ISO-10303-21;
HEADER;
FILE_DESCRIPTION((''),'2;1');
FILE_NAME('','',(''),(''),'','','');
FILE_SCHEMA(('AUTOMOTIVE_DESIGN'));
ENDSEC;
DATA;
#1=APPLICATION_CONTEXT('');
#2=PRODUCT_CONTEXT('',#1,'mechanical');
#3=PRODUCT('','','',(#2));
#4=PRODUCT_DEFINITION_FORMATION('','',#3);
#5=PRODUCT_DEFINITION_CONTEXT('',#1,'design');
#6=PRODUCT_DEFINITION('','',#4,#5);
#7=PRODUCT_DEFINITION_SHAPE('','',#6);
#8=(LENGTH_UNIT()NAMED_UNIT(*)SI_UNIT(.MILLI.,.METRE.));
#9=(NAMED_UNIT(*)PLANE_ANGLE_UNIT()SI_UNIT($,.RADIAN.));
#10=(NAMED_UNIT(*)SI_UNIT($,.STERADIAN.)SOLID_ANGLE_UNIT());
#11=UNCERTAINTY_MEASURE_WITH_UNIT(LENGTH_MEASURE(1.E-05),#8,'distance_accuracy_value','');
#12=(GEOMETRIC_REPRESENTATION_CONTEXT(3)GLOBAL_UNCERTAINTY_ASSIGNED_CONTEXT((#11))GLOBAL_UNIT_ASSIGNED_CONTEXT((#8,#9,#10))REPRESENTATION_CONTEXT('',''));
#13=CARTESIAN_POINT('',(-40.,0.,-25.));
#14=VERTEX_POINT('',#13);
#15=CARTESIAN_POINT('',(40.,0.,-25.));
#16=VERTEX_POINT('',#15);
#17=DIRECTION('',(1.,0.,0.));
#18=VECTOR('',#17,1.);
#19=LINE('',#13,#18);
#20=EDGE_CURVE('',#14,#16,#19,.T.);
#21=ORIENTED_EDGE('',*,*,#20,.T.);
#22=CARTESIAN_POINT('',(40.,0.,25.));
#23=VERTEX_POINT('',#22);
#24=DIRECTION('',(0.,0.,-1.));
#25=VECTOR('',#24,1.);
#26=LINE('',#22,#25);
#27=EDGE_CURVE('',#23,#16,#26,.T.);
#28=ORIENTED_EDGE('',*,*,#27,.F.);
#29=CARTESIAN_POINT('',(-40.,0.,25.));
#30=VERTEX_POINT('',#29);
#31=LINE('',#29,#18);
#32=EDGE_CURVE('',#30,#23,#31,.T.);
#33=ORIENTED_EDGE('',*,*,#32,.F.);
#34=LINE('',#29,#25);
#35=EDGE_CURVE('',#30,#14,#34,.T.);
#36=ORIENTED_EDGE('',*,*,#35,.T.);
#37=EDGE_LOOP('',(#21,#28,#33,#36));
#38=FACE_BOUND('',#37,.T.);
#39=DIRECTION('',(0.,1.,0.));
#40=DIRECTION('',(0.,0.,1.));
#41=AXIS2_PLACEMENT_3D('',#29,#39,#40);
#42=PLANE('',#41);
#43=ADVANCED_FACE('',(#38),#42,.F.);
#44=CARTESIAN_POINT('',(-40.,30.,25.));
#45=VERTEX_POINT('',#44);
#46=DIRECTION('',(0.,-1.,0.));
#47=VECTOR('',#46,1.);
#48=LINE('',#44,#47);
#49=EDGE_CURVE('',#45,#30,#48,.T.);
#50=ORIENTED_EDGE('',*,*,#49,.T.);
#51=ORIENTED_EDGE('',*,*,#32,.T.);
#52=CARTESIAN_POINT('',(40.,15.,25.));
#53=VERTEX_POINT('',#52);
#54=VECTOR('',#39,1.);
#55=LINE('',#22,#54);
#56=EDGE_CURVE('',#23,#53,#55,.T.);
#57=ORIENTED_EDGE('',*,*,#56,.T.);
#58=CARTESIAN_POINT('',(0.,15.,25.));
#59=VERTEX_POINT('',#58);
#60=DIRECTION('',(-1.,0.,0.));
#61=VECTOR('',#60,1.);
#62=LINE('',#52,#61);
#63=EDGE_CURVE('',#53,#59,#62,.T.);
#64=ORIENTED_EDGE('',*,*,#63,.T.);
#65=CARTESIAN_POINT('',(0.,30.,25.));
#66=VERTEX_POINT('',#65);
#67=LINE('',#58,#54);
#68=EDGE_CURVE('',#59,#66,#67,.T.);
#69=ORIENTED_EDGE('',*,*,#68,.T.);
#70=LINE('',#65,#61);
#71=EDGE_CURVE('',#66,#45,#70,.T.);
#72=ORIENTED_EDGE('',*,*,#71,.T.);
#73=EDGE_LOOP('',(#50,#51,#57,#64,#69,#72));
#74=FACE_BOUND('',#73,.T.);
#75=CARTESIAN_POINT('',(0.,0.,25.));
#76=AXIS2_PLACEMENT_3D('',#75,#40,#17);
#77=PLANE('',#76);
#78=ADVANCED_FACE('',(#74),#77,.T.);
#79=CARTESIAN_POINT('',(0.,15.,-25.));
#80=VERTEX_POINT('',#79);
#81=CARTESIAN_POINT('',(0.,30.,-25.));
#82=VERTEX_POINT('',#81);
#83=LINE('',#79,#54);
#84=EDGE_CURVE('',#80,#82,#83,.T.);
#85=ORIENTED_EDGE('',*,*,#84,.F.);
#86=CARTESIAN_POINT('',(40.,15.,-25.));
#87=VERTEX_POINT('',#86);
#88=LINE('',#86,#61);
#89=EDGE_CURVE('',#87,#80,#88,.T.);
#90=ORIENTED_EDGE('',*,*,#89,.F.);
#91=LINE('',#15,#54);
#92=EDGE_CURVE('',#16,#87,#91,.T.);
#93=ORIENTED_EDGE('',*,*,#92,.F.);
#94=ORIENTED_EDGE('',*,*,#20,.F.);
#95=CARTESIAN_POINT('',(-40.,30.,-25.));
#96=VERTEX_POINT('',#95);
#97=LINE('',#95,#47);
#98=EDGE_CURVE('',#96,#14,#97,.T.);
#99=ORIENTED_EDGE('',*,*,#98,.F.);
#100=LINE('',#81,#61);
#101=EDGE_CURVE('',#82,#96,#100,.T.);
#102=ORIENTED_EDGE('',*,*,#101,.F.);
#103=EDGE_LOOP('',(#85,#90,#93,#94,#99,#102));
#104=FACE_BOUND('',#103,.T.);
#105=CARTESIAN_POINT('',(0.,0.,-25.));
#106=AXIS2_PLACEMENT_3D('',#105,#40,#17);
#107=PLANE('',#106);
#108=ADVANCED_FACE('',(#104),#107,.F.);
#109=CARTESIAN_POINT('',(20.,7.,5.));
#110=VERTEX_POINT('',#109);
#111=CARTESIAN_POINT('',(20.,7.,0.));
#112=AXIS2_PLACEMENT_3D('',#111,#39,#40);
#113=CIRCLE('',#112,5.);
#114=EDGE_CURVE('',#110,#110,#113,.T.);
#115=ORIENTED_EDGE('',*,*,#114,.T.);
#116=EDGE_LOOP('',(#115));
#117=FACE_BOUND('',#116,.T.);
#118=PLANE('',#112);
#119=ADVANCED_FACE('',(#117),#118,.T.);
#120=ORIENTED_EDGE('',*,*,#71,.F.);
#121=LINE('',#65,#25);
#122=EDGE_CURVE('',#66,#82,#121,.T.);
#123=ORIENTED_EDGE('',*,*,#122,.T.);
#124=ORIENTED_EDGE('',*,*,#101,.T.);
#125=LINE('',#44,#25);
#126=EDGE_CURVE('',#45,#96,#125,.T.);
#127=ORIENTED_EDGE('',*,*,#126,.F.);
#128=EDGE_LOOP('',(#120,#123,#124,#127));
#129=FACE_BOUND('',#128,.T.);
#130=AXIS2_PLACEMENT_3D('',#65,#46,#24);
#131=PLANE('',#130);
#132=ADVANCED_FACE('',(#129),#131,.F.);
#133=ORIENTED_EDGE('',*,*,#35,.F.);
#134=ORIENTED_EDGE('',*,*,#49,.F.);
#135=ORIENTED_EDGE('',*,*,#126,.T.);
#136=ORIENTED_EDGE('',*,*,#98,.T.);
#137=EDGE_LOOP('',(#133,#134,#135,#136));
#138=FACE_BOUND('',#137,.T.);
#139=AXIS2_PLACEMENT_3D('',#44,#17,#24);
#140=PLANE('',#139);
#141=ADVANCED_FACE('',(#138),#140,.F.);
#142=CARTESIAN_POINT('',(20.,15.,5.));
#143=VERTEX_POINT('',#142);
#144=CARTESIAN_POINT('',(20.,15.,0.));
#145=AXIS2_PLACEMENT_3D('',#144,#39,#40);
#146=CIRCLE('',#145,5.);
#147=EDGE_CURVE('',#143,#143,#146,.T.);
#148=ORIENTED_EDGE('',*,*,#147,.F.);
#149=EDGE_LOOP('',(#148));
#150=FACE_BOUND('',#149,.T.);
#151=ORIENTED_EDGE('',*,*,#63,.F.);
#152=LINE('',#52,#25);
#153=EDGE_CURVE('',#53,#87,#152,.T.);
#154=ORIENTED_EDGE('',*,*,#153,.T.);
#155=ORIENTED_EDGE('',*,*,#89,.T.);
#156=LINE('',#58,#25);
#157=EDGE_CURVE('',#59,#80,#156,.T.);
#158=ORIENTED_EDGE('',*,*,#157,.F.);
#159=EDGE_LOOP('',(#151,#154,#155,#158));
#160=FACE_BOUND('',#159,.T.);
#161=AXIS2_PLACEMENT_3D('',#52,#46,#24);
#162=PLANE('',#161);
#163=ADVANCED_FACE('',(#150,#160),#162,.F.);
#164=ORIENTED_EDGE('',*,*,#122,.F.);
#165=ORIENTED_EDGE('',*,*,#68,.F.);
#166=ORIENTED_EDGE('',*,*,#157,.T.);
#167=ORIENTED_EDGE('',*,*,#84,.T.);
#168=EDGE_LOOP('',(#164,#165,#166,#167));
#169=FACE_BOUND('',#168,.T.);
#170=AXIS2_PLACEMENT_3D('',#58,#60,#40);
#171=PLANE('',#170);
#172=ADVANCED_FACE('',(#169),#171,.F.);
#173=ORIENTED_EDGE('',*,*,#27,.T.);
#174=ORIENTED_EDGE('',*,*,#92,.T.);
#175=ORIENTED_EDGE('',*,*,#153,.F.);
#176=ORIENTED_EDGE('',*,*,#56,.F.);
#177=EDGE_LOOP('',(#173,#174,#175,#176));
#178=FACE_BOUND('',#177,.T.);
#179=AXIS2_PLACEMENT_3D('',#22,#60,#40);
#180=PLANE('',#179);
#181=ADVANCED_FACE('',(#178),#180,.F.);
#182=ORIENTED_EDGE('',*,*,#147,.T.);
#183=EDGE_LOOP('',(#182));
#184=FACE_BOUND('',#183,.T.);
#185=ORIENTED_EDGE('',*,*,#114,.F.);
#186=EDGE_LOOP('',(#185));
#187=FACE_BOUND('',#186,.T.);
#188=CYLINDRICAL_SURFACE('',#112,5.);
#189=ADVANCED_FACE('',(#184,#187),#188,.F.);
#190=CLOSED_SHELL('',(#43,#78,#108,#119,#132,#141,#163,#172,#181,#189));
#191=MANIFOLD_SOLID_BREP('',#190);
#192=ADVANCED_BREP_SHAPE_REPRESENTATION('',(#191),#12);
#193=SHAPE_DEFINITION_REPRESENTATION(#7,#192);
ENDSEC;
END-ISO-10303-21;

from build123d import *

# Parameters (mm, degrees)
EXTRUDE_START       = -25
EXTRUDE_1_DEPTH     = 50
SKETCH_2_R          = 5
CUT_EXTRUDE_1_DEPTH = 8


# Read off the part's stored shape, not the designer's step: 凸台-拉伸1
with BuildPart() as part:
    # 凸台-拉伸1 outline → 凸台-拉伸1 (new body)
    with BuildSketch(Plane.XY.offset(EXTRUDE_START)):
        Polygon((-40, 30), (-40, 0), (40, 0), (40, 15), (0, 15), (0, 30), align=None)
    extrude(amount=EXTRUDE_1_DEPTH)

    # 草图2 → 切除-拉伸1 (cut)
    with BuildSketch(Plane(origin=(0, 15, 0), x_dir=(1, 0, 0), z_dir=(0, 1, 0))):
        with Locations(Location((20, 0, 0), (0, 0, 270))):
            Circle(SKETCH_2_R)
    extrude(amount=-CUT_EXTRUDE_1_DEPTH, mode=Mode.SUBTRACT)


solid = part.part
